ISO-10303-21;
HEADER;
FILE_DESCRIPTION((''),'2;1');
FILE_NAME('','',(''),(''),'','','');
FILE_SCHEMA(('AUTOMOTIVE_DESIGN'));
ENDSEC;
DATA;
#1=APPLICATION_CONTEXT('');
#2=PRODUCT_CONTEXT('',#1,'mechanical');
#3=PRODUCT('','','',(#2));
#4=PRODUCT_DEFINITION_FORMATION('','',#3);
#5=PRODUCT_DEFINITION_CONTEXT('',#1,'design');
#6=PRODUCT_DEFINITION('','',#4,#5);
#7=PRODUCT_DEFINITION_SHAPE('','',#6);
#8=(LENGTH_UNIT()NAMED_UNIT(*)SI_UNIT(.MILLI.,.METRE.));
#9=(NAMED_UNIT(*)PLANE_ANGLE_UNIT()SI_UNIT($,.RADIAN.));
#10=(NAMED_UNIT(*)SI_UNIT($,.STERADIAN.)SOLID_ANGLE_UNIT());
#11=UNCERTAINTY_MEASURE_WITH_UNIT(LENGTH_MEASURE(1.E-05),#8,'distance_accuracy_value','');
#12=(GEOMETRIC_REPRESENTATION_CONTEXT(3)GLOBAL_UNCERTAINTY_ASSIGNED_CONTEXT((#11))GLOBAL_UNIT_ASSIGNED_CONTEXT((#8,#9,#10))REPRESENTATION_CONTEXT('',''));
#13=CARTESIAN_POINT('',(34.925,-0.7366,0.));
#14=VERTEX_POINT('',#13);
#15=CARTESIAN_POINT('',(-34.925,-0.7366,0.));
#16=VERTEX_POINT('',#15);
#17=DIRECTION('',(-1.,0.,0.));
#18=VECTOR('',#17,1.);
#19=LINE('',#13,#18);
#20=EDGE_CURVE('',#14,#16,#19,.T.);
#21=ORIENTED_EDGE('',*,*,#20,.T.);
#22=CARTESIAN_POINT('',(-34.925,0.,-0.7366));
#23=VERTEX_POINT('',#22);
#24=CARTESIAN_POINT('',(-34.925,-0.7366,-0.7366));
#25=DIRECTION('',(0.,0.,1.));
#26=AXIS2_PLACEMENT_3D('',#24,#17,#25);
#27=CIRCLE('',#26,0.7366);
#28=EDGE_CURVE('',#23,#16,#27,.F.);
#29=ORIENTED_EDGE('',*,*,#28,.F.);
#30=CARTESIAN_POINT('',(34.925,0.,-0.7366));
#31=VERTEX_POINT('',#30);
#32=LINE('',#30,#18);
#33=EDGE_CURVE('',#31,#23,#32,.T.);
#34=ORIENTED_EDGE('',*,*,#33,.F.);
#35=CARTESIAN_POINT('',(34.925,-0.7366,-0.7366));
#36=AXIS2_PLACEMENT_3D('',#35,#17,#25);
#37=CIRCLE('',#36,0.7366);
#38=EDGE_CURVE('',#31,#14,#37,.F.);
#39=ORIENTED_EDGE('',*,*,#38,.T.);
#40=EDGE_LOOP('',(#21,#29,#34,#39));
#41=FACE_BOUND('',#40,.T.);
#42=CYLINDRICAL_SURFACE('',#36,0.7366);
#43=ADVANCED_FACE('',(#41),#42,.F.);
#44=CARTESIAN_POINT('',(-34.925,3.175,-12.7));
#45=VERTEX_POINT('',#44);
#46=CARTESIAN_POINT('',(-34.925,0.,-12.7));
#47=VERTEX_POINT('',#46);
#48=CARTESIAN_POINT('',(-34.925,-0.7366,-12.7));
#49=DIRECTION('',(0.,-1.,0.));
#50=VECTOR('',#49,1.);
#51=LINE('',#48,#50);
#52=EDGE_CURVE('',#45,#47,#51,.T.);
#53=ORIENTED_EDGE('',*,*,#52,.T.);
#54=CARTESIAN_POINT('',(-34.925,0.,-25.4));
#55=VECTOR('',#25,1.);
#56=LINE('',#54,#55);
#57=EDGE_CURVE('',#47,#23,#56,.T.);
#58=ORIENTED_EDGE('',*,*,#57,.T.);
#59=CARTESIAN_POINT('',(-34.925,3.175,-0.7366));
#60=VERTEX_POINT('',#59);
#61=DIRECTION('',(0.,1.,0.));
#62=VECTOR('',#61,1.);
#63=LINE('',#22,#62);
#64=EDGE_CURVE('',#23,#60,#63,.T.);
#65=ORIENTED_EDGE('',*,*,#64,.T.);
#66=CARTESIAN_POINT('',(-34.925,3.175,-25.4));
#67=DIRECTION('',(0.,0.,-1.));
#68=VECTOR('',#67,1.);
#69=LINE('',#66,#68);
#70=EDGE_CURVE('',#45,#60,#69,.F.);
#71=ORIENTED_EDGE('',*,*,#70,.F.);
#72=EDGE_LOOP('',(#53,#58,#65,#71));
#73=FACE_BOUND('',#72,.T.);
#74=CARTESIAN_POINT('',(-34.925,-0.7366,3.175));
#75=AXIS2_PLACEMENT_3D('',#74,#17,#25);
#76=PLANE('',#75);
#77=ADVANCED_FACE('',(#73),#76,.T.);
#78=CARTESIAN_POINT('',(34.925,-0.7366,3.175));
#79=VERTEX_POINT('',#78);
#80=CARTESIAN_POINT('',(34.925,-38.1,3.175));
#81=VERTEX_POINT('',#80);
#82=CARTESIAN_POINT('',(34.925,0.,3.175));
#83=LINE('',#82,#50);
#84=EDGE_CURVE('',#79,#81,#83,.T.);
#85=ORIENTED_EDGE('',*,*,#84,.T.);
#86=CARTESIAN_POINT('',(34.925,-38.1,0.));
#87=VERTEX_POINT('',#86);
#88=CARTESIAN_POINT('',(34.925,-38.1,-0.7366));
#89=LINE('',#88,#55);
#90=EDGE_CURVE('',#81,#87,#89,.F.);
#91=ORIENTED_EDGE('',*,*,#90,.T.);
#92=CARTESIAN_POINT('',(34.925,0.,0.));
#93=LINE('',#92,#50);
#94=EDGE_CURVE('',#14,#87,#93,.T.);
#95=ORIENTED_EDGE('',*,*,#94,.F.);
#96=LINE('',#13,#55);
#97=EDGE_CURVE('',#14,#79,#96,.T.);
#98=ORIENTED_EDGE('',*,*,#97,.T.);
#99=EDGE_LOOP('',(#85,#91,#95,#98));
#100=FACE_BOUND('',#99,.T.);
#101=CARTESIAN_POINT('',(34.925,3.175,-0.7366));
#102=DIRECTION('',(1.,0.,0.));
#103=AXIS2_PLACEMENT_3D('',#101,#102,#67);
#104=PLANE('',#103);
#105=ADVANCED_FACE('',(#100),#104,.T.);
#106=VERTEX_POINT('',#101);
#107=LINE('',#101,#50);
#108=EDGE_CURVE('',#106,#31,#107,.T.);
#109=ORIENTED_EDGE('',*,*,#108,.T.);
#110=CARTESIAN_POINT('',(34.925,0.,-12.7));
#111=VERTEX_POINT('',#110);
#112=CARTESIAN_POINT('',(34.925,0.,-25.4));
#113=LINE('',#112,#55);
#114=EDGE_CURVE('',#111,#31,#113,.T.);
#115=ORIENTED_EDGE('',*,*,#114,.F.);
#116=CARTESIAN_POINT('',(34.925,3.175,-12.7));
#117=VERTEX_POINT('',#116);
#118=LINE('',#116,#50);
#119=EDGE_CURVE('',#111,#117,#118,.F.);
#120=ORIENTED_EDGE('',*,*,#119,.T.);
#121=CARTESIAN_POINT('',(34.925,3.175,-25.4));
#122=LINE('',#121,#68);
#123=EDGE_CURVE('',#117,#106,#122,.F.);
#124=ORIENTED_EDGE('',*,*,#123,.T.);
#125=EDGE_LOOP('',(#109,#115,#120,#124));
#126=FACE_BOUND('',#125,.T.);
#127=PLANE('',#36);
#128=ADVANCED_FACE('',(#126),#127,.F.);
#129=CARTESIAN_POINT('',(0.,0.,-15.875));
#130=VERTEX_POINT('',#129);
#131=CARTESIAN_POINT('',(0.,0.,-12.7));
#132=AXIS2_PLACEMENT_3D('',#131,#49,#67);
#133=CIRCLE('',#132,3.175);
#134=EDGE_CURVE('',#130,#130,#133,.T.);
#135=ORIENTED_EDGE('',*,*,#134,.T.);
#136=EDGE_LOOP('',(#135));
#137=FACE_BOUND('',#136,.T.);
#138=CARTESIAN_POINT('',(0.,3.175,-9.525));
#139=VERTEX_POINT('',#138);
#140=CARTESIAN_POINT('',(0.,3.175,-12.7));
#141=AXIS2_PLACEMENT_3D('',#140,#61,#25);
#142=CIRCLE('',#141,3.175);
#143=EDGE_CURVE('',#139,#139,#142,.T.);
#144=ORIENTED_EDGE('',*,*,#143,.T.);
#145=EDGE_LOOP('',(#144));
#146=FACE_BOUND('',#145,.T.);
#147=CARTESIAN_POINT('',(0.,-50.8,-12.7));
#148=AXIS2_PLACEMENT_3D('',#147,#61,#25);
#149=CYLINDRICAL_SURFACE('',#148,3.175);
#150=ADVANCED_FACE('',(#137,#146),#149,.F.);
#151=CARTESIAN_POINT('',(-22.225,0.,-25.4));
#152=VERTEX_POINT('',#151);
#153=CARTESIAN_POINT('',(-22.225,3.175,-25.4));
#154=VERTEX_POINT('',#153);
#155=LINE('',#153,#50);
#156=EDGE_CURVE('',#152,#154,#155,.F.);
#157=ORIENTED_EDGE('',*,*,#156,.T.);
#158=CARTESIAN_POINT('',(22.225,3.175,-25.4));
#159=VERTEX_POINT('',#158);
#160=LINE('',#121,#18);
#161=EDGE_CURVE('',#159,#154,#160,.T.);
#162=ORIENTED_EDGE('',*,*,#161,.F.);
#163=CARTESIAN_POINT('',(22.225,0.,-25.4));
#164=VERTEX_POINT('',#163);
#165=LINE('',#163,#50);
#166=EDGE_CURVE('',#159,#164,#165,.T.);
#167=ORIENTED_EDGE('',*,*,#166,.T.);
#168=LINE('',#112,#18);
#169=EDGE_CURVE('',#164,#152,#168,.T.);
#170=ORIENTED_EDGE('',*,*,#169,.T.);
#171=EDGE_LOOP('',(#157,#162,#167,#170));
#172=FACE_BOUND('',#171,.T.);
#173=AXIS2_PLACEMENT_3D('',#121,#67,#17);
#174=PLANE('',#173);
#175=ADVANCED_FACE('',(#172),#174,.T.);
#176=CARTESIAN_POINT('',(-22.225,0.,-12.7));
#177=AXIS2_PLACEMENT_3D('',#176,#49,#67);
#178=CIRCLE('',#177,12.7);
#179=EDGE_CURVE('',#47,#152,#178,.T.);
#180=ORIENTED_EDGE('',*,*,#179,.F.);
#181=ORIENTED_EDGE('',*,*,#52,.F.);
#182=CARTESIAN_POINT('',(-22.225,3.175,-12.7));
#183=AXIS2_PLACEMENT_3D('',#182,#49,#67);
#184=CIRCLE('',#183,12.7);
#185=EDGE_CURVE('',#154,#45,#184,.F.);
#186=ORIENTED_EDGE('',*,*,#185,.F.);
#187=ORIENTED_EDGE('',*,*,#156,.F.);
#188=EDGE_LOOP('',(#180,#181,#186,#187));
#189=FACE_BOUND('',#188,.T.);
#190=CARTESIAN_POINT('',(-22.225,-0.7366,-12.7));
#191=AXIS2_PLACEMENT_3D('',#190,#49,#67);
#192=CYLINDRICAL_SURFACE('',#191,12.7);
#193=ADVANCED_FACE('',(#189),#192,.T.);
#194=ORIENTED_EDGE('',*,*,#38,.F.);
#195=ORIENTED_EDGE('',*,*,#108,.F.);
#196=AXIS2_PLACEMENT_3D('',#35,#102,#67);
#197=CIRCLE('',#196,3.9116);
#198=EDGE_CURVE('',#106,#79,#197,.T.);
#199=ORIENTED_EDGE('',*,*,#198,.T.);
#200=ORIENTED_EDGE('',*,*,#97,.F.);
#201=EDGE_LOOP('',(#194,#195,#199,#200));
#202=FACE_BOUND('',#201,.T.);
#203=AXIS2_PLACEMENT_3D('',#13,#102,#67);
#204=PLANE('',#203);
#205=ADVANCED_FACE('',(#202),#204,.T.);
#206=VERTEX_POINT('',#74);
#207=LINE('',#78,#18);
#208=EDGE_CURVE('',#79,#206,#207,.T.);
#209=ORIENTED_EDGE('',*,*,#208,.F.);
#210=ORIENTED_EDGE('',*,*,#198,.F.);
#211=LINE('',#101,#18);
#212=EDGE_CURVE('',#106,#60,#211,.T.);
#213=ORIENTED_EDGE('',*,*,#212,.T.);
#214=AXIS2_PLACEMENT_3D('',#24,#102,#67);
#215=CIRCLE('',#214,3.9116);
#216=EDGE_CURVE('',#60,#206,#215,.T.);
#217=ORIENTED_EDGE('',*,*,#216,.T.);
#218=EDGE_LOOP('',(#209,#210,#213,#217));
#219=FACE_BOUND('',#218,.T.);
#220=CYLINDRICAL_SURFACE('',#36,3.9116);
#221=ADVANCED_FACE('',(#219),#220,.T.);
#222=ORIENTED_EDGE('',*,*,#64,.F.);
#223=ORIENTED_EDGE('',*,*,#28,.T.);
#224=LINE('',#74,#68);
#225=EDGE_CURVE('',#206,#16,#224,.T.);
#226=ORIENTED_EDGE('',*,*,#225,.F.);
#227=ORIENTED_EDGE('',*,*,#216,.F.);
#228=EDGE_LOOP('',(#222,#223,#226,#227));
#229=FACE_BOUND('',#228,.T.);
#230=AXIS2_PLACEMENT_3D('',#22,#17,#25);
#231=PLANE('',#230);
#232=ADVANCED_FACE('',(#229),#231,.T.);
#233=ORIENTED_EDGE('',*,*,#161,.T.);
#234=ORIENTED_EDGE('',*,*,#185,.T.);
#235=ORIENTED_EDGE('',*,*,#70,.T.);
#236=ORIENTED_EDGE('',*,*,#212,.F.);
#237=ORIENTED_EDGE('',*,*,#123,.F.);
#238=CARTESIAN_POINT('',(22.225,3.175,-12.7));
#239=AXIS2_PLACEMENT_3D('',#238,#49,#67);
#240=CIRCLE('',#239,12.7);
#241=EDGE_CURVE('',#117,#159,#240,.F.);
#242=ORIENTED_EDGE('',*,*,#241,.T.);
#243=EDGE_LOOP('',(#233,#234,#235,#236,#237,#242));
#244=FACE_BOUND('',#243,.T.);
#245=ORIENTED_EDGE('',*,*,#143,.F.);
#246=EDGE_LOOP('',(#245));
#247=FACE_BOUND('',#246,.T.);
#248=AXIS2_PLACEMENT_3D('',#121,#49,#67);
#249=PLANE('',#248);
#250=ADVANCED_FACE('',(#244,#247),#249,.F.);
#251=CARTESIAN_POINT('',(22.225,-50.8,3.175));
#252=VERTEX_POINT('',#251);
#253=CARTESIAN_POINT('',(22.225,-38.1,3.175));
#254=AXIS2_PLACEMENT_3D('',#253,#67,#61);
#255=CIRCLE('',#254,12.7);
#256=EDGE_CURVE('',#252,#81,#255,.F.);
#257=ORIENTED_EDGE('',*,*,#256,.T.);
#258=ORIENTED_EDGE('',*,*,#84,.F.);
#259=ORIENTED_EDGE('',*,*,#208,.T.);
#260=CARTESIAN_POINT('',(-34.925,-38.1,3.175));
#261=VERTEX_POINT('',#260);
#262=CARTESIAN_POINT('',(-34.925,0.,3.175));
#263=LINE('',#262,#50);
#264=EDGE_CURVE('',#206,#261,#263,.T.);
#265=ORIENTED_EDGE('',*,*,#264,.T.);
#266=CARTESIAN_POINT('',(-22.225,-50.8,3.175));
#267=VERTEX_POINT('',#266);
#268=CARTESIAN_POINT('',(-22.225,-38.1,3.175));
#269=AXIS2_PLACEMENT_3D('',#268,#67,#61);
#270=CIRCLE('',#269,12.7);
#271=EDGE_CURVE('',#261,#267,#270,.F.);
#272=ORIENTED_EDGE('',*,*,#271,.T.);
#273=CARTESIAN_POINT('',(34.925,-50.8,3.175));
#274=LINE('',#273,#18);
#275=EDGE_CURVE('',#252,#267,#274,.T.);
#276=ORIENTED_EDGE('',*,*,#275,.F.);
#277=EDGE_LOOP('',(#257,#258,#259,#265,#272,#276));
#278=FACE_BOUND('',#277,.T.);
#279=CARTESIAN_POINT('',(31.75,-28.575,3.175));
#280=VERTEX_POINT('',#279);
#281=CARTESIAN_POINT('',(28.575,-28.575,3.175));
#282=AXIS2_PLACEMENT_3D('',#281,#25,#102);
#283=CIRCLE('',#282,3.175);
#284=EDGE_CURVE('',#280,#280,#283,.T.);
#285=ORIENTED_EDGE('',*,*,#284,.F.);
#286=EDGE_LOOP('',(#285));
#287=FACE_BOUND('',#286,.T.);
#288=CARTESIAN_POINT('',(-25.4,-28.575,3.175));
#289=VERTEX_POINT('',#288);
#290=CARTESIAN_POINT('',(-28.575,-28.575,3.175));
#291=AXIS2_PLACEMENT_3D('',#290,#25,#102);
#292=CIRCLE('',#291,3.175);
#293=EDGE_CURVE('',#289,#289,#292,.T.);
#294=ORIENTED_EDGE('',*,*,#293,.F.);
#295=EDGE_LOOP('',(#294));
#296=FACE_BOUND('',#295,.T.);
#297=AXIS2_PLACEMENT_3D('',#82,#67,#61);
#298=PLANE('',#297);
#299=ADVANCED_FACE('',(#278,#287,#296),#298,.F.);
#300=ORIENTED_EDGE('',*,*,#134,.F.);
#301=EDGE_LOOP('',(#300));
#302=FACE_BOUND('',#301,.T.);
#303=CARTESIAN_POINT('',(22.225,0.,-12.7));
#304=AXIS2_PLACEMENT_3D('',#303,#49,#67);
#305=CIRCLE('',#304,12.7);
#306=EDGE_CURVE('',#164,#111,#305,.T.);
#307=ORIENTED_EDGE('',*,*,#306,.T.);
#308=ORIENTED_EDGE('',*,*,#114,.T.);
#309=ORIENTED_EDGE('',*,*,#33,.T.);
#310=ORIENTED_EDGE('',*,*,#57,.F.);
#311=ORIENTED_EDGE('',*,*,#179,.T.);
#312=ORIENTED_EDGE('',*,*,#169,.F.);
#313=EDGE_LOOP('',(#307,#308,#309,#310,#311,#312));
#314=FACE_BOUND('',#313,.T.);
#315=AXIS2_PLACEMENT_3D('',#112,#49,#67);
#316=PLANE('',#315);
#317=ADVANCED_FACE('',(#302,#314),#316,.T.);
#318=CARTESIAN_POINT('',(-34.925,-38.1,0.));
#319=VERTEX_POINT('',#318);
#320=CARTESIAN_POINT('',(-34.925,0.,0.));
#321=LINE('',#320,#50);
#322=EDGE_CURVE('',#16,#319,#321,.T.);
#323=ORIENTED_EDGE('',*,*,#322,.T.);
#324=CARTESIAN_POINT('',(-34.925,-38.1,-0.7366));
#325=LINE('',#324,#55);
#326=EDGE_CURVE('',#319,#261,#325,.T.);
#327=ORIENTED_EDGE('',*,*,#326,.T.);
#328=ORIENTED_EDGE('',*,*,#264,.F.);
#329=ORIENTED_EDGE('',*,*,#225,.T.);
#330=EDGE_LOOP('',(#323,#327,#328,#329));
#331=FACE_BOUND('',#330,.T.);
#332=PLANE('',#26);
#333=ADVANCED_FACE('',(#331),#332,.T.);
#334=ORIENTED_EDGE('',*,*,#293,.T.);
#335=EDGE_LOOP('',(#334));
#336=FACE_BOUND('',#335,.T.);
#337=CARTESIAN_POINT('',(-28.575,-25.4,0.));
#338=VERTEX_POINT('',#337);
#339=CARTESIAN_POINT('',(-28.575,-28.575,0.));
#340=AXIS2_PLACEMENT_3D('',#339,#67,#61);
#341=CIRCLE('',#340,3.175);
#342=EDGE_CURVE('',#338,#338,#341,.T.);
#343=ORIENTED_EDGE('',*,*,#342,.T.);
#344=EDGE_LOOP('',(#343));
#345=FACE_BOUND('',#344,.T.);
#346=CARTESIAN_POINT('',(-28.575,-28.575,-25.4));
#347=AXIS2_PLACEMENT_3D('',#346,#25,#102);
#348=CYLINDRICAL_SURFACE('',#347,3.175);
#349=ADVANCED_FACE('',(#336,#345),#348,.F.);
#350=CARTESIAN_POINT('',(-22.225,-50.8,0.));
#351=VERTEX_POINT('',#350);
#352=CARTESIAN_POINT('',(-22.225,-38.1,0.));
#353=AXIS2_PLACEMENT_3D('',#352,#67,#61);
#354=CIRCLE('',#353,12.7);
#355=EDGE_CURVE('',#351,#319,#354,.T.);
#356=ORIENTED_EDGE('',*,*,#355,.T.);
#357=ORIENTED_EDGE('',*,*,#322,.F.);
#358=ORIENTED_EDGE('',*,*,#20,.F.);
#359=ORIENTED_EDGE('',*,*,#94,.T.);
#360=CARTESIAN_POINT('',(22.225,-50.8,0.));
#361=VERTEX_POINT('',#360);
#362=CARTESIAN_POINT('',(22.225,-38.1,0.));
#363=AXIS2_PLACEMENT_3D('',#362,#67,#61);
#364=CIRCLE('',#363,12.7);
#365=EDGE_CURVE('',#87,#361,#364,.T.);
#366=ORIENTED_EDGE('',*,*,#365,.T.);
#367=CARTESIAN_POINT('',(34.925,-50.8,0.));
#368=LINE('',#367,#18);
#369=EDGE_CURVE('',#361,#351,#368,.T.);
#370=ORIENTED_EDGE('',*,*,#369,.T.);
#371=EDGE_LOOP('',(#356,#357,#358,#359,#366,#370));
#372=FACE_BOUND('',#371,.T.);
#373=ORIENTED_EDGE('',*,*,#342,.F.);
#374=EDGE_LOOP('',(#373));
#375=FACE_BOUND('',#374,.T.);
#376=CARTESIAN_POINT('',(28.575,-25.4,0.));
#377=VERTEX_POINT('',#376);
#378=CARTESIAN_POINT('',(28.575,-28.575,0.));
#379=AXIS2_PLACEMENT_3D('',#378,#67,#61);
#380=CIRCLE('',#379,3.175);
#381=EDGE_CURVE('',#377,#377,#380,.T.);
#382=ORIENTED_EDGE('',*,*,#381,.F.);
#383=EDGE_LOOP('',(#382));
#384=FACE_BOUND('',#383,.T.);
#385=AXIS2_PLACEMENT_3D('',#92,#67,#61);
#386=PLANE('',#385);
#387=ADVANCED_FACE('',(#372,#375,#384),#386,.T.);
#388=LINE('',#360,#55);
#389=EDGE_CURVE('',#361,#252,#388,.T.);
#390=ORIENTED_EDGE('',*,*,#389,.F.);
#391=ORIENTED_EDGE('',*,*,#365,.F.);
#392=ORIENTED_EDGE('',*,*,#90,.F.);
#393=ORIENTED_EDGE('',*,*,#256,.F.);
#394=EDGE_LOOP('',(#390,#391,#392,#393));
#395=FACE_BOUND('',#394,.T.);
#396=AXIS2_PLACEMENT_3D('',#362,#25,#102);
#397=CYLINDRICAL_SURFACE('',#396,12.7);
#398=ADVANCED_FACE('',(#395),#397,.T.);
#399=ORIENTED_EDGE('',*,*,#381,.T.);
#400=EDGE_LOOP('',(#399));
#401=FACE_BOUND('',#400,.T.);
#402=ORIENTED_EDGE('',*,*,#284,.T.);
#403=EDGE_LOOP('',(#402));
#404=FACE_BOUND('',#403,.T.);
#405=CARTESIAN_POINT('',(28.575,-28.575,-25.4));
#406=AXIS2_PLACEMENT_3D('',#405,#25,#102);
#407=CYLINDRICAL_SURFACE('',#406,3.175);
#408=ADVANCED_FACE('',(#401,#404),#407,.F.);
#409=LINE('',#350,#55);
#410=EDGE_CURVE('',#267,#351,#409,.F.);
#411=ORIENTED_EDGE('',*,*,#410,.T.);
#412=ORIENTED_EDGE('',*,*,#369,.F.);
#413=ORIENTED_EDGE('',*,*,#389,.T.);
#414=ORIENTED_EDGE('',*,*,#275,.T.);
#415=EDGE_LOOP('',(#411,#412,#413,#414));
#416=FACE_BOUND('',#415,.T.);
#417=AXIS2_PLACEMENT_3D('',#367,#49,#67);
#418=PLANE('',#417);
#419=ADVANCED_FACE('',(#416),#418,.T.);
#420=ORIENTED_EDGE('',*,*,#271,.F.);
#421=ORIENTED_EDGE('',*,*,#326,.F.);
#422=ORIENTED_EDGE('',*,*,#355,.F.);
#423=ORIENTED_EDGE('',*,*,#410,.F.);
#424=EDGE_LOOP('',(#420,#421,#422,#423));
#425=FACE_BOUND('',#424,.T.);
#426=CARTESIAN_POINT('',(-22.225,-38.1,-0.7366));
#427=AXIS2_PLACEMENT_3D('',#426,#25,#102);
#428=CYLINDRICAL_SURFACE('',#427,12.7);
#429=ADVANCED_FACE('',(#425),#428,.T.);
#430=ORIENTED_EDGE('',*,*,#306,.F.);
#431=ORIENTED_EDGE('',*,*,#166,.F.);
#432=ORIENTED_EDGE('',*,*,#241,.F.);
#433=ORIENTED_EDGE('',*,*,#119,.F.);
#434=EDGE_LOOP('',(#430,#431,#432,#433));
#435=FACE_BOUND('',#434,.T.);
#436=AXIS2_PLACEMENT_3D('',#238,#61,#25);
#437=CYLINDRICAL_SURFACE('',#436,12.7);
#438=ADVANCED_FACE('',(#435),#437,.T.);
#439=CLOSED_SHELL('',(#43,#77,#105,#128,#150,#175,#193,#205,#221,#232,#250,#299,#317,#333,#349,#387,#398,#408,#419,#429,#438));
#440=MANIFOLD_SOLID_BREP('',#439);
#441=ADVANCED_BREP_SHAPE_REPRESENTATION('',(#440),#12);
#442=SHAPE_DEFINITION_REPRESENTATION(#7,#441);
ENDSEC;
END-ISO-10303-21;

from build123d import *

# Parameters (mm, degrees)
BASE_FLANGE1_DEPTH = 34.925
SKETCH6_R          = 3.175
CUT_EXTRUDE1_DEPTH = 68.947967225
FILLET1_R          = 12.7
SKETCH7_R          = 3.175
CUT_EXTRUDE2_DEPTH = 70.124642856


# Sheet-metal steps are written as plain solids
with BuildPart() as part:
    # Sketch1 → Base-Flange1 (new, symmetric)
    with BuildSketch(Plane(origin=(0, 0, 0), x_dir=(0, 0, -1), z_dir=(1, 0, 0))):
        with BuildLine():
            Line((25.4, 0), (0.7366, 0))
            ThreePointArc((0.7366, 0), (0.215745145, -0.215745145), (0, -0.7366))
            Line((0, -0.7366), (0, -50.8))
            Line((0, -50.8), (-3.175, -50.8))
            Line((-3.175, -50.8), (-3.175, -0.7366))
            ThreePointArc((-3.175, -0.7366), (-2.029318885, 2.029318885), (0.7366, 3.175))
            Line((0.7366, 3.175), (25.4, 3.175))
            Line((25.4, 3.175), (25.4, 0))
        make_face()
    extrude(amount=BASE_FLANGE1_DEPTH, both=True)

    # Sketch6 → Cut-Extrude1 (cut, through all)
    with BuildSketch(Plane.XY.offset(3.175)):
        with Locations((-28.575, -28.575)):
            Circle(SKETCH6_R)
        with Locations((28.575, -28.575)):
            Circle(SKETCH6_R)
    extrude(amount=-CUT_EXTRUDE1_DEPTH, mode=Mode.SUBTRACT)

    # Fillet1
    fillet1_edges = [part.edges().sort_by_distance(p)[0] for p in [
        (34.925, 1.5875, -25.4),
        (34.925, -50.8, 1.5875),
        (-34.925, 1.5875, -25.4),
        (-34.925, -50.8, 1.5875),
    ]]
    fillet(fillet1_edges, radius=FILLET1_R)

    # Sketch7 → Cut-Extrude2 (cut, through all)
    with BuildSketch(Plane(origin=(0, 3.175, 0), x_dir=(1, 0, 0), z_dir=(0, 1, 0))):
        with Locations(Location((0, 12.7, 0), (0, 0, 270))):
            Circle(SKETCH7_R)
    extrude(amount=-CUT_EXTRUDE2_DEPTH, mode=Mode.SUBTRACT)


solid = part.part
